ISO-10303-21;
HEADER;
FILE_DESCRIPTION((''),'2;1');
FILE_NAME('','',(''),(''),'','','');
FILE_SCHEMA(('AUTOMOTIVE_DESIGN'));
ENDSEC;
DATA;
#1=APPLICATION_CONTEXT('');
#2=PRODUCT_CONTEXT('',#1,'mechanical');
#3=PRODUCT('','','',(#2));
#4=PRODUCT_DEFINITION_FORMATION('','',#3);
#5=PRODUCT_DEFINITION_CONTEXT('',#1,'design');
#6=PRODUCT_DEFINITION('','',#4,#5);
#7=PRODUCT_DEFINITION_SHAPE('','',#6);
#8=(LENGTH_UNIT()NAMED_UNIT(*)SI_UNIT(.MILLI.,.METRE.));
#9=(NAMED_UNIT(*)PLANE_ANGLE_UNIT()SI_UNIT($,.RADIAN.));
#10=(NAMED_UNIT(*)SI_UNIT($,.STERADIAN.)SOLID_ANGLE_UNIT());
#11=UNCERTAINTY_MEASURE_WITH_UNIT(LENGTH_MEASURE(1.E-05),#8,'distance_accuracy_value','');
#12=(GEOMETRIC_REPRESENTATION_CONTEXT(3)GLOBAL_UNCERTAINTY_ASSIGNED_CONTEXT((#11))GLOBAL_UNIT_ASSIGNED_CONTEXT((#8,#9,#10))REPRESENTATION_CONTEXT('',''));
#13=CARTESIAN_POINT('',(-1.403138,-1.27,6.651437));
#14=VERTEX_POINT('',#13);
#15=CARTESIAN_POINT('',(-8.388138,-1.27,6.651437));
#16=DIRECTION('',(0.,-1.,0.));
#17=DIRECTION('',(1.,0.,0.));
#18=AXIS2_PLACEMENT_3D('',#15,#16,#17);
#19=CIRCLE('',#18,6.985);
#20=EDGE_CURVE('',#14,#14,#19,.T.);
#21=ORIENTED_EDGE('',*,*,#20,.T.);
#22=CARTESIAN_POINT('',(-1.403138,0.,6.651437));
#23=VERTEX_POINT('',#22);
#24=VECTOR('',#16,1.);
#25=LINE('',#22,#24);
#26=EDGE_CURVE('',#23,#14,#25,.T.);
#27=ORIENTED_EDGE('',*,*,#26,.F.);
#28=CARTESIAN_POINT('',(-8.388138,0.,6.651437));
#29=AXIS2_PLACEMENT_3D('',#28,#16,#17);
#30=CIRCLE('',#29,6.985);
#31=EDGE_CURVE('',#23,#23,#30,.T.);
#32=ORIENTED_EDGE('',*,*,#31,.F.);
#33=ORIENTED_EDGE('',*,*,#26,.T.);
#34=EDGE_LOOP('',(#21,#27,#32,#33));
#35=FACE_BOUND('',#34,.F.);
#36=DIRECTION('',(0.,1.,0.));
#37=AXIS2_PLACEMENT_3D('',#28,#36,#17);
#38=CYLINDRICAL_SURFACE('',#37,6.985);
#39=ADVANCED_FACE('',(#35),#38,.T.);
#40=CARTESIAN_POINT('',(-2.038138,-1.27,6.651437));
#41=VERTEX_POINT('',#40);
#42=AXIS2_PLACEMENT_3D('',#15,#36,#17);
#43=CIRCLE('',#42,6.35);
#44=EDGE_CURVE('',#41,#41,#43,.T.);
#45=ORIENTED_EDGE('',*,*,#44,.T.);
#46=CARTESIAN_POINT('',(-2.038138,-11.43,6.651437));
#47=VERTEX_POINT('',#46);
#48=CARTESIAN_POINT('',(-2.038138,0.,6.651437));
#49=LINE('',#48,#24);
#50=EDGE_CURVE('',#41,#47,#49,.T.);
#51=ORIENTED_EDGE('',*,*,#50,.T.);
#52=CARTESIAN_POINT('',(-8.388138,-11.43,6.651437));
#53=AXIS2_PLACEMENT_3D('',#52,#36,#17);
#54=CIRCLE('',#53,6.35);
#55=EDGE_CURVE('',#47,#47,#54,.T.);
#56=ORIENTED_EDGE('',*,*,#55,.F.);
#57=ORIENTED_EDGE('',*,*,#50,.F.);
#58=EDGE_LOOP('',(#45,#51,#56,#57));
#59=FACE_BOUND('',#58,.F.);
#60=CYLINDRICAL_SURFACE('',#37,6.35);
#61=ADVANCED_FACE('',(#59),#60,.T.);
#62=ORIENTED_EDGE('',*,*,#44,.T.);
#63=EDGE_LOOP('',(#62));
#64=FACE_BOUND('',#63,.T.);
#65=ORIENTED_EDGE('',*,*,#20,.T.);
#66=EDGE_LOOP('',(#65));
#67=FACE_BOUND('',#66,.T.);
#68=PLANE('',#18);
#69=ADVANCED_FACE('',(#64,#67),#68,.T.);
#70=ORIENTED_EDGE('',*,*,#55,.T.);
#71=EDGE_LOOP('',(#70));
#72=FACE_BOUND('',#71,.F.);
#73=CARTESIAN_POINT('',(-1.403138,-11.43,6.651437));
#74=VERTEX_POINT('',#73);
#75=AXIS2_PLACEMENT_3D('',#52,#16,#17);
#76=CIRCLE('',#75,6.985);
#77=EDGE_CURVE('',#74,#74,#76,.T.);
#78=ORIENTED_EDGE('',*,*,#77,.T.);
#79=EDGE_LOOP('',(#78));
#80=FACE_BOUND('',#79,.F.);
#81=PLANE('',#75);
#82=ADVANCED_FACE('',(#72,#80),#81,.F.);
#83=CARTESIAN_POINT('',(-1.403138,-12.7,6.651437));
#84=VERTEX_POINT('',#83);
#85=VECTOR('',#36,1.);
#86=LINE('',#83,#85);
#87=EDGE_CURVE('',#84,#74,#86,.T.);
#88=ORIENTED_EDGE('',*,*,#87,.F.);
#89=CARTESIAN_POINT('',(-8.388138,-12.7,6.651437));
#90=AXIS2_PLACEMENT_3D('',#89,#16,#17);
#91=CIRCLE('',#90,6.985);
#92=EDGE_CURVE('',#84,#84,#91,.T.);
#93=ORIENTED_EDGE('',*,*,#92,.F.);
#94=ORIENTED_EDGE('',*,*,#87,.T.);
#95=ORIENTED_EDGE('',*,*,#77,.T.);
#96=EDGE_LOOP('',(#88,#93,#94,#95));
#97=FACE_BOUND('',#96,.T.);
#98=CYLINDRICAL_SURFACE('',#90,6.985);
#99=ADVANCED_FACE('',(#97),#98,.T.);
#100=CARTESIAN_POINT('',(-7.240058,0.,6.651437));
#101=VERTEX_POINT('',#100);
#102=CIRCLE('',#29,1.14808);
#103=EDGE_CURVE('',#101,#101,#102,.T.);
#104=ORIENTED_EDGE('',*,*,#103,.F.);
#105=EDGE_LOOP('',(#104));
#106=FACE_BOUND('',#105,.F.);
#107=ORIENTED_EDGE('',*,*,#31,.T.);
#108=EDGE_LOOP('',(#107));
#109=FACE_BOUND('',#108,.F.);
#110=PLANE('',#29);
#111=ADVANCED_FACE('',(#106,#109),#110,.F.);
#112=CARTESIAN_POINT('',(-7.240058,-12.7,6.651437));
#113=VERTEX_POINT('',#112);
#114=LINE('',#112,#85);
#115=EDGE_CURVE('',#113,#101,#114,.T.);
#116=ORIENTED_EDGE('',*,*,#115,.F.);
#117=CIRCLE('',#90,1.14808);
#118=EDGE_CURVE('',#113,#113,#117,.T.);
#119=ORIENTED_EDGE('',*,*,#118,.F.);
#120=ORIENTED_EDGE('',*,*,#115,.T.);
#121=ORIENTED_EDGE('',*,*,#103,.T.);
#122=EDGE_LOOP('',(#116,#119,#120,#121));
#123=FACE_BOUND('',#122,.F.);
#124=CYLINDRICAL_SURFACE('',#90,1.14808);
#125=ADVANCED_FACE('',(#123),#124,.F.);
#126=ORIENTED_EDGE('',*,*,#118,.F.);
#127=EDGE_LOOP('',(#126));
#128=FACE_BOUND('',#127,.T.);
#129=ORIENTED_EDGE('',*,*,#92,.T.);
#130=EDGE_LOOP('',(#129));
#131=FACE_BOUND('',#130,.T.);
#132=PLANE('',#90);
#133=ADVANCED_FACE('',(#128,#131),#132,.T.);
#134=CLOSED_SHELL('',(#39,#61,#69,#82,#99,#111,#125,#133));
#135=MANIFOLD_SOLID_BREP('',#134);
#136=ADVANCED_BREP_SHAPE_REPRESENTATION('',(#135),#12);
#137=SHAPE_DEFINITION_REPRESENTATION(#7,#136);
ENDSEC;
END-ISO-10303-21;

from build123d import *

# Parameters (mm, degrees)
F0_R     = 6.35
F1_DEPTH = 12.7
F2_R     = 6.985
F3_DEPTH = 1.27
F4_R     = 6.985
F5_DEPTH = 1.27
F6_R     = 1.14808
F7_DEPTH = 25.4


with BuildPart() as f1:
    # F0 (on Front) → F1 (new body)
    with BuildSketch(Plane.XZ):
        with Locations((-8.3881383762, 6.6514373757)):
            Circle(F0_R)
    extrude(amount=F1_DEPTH)

    # F2 (on face) → F3 (join)
    with BuildSketch(Plane.XZ.offset(12.7)):
        with Locations((-8.3881383762, 6.6514373757)):
            Circle(F2_R)
    extrude(amount=-F3_DEPTH)

    # F4 (on Front) → F5 (join)
    with BuildSketch(Plane.XZ):
        with Locations((-8.3881383762, 6.6514373757)):
            Circle(F4_R)
    extrude(amount=F5_DEPTH)

    # F6 (on face) → F7 (cut)
    with BuildSketch(Plane.XZ.offset(12.7)):
        with Locations((-8.3881383762, 6.6514373757)):
            Circle(F6_R)
    extrude(amount=-F7_DEPTH, mode=Mode.SUBTRACT)


solid = f1.part
